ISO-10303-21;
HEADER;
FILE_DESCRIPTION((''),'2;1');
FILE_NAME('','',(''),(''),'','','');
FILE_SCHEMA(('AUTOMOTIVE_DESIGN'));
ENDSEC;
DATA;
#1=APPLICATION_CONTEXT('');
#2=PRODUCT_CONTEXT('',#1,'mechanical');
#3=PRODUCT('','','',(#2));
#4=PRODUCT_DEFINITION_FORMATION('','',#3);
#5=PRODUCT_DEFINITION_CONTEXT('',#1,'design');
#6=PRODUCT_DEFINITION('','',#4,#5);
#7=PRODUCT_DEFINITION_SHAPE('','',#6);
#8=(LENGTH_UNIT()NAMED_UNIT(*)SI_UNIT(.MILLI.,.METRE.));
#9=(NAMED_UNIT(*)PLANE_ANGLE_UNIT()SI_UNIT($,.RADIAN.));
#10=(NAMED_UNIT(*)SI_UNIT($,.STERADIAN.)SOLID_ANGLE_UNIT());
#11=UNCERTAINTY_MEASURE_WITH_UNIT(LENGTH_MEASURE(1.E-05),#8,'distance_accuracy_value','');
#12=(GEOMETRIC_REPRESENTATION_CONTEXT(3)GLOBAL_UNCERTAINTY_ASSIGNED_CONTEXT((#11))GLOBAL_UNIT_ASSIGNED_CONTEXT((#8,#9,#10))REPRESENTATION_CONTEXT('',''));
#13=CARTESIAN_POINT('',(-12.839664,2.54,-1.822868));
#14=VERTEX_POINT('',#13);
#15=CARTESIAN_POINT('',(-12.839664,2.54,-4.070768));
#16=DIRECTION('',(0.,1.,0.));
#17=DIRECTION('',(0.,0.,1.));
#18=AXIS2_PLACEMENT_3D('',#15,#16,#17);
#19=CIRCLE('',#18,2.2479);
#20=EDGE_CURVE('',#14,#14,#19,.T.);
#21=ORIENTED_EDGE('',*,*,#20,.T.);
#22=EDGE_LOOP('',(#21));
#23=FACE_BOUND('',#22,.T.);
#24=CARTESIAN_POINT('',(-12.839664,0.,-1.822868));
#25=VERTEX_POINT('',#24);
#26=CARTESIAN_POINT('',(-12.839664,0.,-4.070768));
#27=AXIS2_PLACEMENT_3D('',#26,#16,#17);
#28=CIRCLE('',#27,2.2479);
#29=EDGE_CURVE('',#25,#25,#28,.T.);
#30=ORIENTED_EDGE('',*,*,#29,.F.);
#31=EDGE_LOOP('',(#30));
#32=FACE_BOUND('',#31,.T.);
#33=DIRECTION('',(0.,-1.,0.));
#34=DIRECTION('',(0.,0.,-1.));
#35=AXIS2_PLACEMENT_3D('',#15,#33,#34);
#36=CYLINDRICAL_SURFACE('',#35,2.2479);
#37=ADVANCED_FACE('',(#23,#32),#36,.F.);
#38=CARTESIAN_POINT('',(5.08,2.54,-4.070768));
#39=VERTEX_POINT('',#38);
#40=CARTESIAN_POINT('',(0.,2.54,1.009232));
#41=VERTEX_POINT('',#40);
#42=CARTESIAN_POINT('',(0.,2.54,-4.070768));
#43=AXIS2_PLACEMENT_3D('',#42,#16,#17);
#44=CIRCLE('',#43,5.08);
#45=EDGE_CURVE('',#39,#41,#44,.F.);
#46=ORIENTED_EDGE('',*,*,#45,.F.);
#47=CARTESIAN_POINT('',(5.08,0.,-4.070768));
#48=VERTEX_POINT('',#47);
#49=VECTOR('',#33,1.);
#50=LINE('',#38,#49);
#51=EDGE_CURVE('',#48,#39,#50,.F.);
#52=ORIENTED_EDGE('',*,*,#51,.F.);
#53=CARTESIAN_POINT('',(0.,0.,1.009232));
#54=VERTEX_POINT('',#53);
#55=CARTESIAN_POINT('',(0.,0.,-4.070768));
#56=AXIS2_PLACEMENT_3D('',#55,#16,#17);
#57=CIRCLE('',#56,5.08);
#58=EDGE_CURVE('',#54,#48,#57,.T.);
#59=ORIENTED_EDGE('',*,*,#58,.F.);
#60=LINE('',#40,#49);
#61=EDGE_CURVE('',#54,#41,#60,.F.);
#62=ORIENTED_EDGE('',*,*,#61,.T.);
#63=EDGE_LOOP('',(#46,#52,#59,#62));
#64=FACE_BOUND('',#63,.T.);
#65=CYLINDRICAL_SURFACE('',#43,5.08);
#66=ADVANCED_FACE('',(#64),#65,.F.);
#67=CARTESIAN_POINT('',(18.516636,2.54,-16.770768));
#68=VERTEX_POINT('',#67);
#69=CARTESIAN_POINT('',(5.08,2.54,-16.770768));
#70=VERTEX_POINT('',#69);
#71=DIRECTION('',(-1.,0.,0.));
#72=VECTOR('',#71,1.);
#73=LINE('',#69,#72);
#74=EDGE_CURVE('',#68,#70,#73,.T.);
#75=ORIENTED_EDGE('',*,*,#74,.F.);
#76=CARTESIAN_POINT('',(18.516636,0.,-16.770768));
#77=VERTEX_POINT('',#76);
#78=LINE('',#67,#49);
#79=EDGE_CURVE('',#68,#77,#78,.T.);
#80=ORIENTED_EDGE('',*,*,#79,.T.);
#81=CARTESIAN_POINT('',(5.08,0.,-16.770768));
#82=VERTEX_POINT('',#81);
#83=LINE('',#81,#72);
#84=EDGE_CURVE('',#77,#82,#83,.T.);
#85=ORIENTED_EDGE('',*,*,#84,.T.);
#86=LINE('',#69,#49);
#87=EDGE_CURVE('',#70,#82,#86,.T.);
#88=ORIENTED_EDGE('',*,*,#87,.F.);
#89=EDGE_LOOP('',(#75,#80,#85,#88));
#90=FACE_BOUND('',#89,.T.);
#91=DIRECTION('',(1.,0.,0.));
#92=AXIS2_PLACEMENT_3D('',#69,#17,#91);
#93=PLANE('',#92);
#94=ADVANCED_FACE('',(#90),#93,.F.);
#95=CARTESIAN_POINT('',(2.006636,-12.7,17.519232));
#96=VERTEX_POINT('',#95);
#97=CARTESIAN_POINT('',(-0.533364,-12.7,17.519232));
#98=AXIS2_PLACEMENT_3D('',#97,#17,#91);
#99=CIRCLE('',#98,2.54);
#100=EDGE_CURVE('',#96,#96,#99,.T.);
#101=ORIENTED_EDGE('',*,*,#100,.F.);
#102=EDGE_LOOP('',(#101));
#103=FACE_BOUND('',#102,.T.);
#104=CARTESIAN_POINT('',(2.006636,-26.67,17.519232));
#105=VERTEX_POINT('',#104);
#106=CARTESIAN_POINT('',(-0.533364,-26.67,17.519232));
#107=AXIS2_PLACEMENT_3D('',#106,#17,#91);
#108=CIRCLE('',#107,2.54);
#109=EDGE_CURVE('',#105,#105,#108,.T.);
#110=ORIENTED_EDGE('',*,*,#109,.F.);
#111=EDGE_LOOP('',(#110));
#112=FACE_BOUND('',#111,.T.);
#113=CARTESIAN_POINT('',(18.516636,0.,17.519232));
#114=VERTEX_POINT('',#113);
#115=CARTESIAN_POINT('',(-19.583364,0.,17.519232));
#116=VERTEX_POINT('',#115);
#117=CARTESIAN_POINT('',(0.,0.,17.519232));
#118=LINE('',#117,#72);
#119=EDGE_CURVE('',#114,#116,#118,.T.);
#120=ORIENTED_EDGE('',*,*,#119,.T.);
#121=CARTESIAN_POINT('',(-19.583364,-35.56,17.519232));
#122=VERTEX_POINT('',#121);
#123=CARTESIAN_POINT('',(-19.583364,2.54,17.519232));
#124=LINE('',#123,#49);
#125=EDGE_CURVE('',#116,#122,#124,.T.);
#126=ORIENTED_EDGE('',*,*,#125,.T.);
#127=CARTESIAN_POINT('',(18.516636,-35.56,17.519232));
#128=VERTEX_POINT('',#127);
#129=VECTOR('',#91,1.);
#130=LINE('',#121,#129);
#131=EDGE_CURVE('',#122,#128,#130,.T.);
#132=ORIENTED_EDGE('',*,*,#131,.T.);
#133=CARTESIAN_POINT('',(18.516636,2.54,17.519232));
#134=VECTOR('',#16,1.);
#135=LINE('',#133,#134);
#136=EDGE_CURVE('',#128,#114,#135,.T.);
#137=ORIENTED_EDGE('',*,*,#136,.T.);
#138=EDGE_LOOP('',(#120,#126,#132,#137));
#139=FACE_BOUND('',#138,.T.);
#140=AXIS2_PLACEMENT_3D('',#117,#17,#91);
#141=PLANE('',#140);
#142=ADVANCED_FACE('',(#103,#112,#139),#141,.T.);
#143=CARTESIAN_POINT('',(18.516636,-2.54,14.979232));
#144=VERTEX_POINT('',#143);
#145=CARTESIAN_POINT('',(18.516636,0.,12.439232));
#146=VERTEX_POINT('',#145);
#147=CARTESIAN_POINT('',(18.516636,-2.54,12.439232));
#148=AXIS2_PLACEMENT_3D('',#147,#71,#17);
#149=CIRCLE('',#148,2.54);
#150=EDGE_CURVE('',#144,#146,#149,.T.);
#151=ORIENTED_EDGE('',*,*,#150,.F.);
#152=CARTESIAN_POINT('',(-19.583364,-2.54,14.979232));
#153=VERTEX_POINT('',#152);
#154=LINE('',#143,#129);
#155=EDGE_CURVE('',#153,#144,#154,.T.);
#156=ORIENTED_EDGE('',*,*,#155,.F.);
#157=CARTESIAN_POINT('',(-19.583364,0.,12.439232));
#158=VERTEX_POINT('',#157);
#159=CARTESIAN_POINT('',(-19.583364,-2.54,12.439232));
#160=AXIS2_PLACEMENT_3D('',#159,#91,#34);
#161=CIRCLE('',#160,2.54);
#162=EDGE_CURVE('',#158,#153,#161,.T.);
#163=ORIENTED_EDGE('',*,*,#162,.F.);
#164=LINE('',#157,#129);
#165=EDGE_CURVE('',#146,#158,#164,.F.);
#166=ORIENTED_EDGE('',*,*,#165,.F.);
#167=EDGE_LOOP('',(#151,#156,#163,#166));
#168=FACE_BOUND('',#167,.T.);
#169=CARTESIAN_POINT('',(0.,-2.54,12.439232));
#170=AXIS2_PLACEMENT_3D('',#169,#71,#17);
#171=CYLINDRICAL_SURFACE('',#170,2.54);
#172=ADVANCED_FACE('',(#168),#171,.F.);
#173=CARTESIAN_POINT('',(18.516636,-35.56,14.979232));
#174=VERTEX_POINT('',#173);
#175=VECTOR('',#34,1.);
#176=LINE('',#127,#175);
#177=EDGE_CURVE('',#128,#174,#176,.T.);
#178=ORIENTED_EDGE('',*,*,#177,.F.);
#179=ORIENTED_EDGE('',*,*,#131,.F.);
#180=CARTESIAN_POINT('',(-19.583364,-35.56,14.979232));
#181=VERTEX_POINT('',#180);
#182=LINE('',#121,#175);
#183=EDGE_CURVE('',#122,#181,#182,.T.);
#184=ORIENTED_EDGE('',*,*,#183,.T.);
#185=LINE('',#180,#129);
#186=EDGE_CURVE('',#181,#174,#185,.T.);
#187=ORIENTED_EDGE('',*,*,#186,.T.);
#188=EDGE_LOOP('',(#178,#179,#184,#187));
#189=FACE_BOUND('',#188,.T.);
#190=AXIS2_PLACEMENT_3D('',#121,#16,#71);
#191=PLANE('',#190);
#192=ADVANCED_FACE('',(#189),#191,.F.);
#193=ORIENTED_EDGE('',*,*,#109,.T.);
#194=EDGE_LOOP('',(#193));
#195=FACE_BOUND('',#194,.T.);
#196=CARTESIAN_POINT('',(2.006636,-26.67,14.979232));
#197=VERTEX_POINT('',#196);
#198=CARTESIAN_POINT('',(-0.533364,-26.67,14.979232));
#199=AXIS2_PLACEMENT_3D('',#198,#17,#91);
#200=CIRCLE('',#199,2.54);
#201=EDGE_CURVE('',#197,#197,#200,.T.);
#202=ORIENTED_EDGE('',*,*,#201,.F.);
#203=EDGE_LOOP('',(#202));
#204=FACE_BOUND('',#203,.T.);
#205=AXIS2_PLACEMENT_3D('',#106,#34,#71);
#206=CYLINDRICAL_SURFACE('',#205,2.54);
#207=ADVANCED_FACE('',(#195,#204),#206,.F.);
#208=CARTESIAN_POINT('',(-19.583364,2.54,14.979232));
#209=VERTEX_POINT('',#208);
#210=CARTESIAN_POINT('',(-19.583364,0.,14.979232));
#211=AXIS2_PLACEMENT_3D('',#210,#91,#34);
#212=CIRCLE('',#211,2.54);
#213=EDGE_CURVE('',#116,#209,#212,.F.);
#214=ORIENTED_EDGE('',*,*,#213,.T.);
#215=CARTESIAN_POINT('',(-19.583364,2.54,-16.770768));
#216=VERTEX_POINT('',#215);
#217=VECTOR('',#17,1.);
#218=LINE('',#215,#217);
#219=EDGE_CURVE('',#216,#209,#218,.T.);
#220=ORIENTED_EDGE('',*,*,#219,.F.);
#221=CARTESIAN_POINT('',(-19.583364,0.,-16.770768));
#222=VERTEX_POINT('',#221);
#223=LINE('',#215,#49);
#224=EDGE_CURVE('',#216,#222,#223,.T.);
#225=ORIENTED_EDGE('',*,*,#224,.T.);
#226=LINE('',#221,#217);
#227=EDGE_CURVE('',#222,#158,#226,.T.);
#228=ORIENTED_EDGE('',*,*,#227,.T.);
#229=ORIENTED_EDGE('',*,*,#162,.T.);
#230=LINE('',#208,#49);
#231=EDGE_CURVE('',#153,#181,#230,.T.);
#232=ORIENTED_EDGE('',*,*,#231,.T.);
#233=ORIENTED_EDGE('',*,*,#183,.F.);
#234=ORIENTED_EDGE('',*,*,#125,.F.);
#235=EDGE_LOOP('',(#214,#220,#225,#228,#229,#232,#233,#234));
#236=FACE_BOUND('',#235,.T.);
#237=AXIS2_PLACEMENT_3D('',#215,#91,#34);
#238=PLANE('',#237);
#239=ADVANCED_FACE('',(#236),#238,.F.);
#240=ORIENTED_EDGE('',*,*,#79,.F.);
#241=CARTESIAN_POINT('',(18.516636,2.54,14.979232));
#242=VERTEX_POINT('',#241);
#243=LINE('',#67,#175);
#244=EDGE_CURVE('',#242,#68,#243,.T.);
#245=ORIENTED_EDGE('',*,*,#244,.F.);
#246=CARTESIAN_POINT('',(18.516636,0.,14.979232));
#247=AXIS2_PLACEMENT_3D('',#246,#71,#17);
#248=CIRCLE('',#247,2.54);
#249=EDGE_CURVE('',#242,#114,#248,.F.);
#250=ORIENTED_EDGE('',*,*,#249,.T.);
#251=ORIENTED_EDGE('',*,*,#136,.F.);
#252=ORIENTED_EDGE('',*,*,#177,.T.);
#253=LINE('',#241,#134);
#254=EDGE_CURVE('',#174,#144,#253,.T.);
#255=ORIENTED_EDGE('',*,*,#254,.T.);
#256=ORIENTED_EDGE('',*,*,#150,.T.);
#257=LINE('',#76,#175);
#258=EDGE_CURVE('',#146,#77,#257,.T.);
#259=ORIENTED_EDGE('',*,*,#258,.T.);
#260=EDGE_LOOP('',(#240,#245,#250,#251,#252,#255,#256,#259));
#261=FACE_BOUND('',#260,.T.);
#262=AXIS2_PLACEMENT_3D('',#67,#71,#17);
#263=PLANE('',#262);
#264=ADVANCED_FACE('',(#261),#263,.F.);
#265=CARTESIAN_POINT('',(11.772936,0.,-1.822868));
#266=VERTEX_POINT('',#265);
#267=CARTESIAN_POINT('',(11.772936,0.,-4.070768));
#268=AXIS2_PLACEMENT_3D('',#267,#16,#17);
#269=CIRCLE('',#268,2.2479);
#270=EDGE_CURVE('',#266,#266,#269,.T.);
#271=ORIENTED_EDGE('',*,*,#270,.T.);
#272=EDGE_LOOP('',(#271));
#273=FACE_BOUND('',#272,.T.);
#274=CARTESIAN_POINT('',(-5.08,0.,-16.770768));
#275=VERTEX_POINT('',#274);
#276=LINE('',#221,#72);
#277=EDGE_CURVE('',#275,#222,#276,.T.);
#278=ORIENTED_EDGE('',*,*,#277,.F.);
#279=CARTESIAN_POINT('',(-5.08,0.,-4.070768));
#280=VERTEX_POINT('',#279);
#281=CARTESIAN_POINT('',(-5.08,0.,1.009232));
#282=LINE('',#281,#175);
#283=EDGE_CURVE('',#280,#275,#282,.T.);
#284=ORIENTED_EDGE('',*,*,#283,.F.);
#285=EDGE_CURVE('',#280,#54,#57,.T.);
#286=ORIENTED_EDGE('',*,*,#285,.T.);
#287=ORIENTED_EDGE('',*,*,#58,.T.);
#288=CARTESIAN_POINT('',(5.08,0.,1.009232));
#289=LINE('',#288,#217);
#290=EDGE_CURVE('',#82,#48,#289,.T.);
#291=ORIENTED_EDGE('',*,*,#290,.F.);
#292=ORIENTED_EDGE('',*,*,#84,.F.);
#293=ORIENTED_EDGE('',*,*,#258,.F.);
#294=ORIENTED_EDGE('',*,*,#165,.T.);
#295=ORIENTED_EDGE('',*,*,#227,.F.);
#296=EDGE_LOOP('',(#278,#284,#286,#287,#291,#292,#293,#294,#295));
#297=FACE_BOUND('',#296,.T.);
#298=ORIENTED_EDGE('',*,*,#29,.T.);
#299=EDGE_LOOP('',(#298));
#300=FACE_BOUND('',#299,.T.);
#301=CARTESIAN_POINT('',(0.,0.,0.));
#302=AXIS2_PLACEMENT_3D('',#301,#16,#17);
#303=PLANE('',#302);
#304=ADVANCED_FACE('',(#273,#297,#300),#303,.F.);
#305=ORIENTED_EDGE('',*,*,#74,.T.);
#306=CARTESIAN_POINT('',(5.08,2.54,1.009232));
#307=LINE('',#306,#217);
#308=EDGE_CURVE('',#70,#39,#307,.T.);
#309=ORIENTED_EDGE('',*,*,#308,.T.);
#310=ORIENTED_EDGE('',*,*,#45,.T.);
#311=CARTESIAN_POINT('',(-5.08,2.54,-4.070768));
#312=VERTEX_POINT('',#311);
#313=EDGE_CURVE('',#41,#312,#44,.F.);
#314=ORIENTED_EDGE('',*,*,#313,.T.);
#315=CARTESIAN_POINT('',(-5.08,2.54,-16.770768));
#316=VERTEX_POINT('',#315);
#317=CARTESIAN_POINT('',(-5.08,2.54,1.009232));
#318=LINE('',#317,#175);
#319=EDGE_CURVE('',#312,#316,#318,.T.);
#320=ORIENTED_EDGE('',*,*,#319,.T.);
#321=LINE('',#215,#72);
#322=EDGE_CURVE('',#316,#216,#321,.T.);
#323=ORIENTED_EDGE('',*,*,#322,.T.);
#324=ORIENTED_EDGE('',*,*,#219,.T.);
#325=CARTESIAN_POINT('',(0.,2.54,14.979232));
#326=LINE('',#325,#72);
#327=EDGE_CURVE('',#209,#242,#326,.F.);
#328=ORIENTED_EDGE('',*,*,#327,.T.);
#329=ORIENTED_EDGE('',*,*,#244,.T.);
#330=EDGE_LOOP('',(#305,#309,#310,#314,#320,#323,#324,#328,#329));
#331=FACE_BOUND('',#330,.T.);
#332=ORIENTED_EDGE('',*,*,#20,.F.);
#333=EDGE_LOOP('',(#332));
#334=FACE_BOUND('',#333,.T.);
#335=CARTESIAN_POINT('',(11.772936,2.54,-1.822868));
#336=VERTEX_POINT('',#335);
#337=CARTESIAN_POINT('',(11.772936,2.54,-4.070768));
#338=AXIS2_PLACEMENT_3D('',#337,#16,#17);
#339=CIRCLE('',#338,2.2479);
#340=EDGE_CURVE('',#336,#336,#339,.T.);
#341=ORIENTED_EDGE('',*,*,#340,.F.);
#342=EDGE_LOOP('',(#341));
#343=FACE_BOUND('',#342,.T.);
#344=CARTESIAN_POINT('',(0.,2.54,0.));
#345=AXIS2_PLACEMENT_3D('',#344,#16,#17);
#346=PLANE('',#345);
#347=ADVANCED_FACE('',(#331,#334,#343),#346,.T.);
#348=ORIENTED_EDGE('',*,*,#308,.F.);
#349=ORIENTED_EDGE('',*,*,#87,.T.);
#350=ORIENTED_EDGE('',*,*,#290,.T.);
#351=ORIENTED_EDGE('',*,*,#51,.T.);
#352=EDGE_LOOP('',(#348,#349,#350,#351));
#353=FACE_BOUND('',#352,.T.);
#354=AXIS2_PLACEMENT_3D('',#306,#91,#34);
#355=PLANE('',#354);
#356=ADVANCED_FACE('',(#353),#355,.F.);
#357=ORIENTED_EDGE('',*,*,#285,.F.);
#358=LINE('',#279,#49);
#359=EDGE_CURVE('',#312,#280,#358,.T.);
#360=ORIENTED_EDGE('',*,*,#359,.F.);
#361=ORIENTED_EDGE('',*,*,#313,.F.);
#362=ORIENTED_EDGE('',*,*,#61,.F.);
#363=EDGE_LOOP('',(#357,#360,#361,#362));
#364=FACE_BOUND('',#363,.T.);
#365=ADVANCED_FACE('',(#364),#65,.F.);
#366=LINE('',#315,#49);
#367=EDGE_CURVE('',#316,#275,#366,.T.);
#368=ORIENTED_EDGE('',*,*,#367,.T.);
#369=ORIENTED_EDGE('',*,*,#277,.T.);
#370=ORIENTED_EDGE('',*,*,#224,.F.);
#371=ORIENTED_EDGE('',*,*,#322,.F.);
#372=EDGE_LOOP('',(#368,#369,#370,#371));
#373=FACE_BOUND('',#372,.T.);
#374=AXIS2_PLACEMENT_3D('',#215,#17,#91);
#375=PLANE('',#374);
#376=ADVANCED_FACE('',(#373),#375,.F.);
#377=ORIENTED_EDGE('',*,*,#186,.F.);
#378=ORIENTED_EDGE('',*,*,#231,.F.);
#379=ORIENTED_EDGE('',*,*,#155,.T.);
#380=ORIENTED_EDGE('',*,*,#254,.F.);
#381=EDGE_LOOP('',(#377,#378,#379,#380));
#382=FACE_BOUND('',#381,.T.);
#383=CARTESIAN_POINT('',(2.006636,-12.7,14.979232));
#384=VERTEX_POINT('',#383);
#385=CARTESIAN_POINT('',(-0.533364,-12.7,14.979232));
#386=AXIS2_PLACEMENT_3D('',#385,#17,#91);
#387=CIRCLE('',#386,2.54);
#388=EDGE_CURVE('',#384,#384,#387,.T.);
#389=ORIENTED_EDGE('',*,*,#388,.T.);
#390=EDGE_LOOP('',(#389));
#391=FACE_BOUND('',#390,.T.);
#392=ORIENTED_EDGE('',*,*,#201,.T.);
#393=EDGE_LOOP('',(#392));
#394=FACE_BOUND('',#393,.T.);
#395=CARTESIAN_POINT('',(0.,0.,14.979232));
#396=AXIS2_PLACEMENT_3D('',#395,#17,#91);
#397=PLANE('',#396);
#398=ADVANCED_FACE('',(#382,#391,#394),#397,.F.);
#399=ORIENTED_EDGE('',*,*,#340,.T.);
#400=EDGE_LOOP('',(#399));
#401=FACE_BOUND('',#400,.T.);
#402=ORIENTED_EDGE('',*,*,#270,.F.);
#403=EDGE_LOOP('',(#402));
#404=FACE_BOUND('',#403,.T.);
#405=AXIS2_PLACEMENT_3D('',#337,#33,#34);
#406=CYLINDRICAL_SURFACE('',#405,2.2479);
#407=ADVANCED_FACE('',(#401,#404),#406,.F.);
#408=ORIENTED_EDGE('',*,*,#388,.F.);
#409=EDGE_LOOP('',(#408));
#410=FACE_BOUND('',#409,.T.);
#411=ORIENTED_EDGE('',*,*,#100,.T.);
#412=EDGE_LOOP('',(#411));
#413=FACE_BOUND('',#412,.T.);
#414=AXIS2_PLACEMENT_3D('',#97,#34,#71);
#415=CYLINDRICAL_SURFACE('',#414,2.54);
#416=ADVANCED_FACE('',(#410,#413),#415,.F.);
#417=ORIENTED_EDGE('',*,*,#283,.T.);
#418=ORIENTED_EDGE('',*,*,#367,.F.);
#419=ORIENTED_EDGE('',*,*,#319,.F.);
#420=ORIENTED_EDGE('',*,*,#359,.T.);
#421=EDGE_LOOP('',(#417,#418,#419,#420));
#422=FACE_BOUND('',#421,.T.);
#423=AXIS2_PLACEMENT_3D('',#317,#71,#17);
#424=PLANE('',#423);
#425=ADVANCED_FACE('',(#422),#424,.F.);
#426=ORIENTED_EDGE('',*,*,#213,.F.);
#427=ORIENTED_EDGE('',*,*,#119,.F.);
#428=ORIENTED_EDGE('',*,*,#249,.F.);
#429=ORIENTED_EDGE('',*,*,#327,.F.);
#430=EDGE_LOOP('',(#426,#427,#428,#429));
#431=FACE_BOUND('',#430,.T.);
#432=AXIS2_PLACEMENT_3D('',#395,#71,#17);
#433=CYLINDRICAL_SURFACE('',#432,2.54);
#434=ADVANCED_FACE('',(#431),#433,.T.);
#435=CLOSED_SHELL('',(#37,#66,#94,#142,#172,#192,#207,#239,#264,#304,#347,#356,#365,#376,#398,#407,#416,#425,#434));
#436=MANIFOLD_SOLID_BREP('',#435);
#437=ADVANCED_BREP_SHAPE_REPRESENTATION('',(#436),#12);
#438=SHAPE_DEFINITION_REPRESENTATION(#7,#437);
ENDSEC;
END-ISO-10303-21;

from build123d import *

# Parameters (mm, degrees)
SKETCH1_R           = 2.2479
BOSS_EXTRUDE1_DEPTH = 2.54
FILLET1_R           = 5.08
SKETCH2_W           = 38.1
SKETCH2_H           = 38.1
SKETCH2_R           = 2.54
BOSS_EXTRUDE2_DEPTH = 2.54
FILLET2_R           = 2.54
FILLET3_R           = 2.54


with BuildPart() as part:
    # Sketch1 → Boss-Extrude1 (new body)
    with BuildSketch(Plane(origin=(0, 0, 0), x_dir=(1, 0, 0), z_dir=(0, 1, 0))):
        Polygon((-19.583364039, 16.770768135), (-5.08, 16.770768135), (-5.08, -1.009231865), (5.08, -1.009231865), (5.08, 16.770768135), (18.516635961, 16.770768135), (18.516635961, -14.979231865), (-19.583364039, -14.979231865), align=None)
        with Locations(Location((-12.839664039, 4.070768135, 0), (0, 0, 270))):
            Circle(SKETCH1_R, mode=Mode.SUBTRACT)
        with Locations(Location((11.772935961, 4.070768135, 0), (0, 0, 270))):
            Circle(SKETCH1_R, mode=Mode.SUBTRACT)
    extrude(amount=BOSS_EXTRUDE1_DEPTH)

    # Fillet1
    fillet1_edges = [part.edges().sort_by_distance(p)[0] for p in [
        (5.08, 1.27, 1.009231865),
        (-5.08, 1.27, 1.009231865),
    ]]
    fillet(fillet1_edges, radius=FILLET1_R - 0.0001)  # a hair under: the kernel refuses the full size

    # Sketch2 → Boss-Extrude2 (add)
    with BuildSketch(Plane.XY.offset(14.979231865)):
        with Locations((-0.533364039, -16.51)):
            Rectangle(SKETCH2_W, SKETCH2_H)
        with Locations((-0.533364039, -12.7)):
            Circle(SKETCH2_R, mode=Mode.SUBTRACT)
        with Locations((-0.533364039, -26.67)):
            Circle(SKETCH2_R, mode=Mode.SUBTRACT)
    extrude(amount=BOSS_EXTRUDE2_DEPTH)

    # Fillet2
    fillet2_edges = [part.edges().sort_by_distance(p)[0] for p in [
        (-0.533364039, 0, 14.979231865),
    ]]
    fillet(fillet2_edges, radius=FILLET2_R)

    # Fillet3
    fillet3_edges = [part.edges().sort_by_distance(p)[0] for p in [
        (-0.533364039, 2.54, 17.519231865),
    ]]
    fillet(fillet3_edges, radius=FILLET3_R)


solid = part.part
